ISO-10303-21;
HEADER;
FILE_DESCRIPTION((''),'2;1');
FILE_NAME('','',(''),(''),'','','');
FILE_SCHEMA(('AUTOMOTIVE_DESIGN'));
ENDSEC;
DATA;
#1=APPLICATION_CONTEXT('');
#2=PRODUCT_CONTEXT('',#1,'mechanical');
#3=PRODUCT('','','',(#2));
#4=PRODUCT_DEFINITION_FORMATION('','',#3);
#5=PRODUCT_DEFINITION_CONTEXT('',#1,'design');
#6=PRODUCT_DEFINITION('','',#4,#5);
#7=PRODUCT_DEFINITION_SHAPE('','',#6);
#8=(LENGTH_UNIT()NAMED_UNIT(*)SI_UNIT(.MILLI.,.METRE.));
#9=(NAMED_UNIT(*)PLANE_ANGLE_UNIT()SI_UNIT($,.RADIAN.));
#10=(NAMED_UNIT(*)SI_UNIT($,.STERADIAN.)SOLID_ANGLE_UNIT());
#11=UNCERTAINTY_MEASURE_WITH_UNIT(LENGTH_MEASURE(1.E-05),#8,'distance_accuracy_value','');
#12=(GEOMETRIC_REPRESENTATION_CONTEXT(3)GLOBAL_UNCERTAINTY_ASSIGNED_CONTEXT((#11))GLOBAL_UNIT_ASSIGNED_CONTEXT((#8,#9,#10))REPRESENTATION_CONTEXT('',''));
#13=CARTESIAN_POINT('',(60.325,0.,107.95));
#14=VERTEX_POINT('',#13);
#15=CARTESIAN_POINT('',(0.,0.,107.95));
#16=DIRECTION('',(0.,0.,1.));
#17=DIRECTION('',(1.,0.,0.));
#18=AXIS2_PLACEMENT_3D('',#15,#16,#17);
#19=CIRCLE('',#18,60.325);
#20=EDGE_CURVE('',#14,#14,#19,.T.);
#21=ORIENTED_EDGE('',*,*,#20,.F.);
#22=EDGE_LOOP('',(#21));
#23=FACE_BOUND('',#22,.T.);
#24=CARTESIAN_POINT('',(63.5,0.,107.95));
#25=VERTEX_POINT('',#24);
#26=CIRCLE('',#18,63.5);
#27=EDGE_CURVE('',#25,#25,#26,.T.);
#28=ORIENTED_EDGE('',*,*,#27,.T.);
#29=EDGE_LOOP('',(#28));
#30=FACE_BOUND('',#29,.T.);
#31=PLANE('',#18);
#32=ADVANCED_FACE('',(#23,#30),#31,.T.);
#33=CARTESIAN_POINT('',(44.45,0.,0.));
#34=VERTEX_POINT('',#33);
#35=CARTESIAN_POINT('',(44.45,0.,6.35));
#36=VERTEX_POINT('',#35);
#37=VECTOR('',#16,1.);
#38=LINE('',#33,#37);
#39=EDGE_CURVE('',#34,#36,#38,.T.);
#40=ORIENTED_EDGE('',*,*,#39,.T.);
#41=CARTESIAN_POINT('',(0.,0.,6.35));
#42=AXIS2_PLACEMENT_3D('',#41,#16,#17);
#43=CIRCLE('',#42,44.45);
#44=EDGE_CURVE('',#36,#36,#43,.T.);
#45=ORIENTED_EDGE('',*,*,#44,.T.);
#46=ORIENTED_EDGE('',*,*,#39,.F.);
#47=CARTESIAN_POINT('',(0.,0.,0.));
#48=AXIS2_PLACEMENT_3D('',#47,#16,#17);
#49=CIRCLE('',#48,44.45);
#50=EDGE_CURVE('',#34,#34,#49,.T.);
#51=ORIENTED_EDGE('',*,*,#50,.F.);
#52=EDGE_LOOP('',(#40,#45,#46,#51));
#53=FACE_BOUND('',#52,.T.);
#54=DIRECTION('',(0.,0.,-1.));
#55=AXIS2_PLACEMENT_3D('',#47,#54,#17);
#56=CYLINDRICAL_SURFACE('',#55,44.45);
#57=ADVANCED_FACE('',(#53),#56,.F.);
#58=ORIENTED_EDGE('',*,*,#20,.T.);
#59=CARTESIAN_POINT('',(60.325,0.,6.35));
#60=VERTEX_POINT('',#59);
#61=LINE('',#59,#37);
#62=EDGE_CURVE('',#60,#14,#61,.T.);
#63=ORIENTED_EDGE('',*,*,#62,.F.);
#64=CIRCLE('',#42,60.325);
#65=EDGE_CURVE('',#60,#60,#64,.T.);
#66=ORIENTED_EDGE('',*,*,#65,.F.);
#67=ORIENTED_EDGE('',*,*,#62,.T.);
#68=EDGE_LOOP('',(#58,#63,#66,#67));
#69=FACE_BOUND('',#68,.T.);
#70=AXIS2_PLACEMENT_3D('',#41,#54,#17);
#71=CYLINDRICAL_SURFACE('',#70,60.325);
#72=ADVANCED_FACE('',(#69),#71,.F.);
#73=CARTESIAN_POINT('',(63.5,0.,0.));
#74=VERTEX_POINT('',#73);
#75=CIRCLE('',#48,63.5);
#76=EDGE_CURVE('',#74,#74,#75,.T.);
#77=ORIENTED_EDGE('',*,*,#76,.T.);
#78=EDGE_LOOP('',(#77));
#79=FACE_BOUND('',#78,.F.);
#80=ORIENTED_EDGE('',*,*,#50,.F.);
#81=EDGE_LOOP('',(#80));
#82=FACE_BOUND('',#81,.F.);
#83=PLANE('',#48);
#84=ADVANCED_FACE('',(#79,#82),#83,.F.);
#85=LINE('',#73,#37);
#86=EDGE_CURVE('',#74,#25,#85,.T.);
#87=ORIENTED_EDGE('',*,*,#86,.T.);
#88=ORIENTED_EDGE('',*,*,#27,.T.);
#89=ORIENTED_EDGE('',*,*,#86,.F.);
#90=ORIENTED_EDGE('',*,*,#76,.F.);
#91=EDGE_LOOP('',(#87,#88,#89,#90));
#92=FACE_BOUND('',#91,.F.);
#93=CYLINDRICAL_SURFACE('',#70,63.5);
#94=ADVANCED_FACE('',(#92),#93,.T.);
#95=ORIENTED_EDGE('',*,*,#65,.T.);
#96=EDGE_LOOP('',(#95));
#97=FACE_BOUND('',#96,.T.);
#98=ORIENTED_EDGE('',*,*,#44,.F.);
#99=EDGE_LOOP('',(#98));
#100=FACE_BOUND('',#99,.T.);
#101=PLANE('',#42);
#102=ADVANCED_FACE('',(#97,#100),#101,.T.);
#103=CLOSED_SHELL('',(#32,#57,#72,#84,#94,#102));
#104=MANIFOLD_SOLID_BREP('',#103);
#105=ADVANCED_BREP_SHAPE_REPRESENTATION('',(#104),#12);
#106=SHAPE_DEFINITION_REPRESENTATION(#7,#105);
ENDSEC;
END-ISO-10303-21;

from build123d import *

# Parameters (mm, degrees)
F0_R     = 63.5
F0_R_2   = 44.45
F1_DEPTH = 6.35
F2_R     = 63.5
F2_R_2   = 60.325
F3_DEPTH = 101.6


# Not quite as in the source:
# - a length typed as a fraction of an inch, garbled in the dataset ("3 / 203.2 mm" for 3/8 in), is restored


with BuildPart() as f1:
    # F0 (on Top) → F1 (new body)
    with BuildSketch(Plane.XY):
        Circle(F0_R)
        Circle(F0_R_2, mode=Mode.SUBTRACT)
    extrude(amount=F1_DEPTH)

    # F2 (on face) → F3 (join)
    with BuildSketch(Plane.XY.offset(6.35)):
        Circle(F2_R)
        Circle(F2_R_2, mode=Mode.SUBTRACT)
    extrude(amount=F3_DEPTH)


solid = f1.part
